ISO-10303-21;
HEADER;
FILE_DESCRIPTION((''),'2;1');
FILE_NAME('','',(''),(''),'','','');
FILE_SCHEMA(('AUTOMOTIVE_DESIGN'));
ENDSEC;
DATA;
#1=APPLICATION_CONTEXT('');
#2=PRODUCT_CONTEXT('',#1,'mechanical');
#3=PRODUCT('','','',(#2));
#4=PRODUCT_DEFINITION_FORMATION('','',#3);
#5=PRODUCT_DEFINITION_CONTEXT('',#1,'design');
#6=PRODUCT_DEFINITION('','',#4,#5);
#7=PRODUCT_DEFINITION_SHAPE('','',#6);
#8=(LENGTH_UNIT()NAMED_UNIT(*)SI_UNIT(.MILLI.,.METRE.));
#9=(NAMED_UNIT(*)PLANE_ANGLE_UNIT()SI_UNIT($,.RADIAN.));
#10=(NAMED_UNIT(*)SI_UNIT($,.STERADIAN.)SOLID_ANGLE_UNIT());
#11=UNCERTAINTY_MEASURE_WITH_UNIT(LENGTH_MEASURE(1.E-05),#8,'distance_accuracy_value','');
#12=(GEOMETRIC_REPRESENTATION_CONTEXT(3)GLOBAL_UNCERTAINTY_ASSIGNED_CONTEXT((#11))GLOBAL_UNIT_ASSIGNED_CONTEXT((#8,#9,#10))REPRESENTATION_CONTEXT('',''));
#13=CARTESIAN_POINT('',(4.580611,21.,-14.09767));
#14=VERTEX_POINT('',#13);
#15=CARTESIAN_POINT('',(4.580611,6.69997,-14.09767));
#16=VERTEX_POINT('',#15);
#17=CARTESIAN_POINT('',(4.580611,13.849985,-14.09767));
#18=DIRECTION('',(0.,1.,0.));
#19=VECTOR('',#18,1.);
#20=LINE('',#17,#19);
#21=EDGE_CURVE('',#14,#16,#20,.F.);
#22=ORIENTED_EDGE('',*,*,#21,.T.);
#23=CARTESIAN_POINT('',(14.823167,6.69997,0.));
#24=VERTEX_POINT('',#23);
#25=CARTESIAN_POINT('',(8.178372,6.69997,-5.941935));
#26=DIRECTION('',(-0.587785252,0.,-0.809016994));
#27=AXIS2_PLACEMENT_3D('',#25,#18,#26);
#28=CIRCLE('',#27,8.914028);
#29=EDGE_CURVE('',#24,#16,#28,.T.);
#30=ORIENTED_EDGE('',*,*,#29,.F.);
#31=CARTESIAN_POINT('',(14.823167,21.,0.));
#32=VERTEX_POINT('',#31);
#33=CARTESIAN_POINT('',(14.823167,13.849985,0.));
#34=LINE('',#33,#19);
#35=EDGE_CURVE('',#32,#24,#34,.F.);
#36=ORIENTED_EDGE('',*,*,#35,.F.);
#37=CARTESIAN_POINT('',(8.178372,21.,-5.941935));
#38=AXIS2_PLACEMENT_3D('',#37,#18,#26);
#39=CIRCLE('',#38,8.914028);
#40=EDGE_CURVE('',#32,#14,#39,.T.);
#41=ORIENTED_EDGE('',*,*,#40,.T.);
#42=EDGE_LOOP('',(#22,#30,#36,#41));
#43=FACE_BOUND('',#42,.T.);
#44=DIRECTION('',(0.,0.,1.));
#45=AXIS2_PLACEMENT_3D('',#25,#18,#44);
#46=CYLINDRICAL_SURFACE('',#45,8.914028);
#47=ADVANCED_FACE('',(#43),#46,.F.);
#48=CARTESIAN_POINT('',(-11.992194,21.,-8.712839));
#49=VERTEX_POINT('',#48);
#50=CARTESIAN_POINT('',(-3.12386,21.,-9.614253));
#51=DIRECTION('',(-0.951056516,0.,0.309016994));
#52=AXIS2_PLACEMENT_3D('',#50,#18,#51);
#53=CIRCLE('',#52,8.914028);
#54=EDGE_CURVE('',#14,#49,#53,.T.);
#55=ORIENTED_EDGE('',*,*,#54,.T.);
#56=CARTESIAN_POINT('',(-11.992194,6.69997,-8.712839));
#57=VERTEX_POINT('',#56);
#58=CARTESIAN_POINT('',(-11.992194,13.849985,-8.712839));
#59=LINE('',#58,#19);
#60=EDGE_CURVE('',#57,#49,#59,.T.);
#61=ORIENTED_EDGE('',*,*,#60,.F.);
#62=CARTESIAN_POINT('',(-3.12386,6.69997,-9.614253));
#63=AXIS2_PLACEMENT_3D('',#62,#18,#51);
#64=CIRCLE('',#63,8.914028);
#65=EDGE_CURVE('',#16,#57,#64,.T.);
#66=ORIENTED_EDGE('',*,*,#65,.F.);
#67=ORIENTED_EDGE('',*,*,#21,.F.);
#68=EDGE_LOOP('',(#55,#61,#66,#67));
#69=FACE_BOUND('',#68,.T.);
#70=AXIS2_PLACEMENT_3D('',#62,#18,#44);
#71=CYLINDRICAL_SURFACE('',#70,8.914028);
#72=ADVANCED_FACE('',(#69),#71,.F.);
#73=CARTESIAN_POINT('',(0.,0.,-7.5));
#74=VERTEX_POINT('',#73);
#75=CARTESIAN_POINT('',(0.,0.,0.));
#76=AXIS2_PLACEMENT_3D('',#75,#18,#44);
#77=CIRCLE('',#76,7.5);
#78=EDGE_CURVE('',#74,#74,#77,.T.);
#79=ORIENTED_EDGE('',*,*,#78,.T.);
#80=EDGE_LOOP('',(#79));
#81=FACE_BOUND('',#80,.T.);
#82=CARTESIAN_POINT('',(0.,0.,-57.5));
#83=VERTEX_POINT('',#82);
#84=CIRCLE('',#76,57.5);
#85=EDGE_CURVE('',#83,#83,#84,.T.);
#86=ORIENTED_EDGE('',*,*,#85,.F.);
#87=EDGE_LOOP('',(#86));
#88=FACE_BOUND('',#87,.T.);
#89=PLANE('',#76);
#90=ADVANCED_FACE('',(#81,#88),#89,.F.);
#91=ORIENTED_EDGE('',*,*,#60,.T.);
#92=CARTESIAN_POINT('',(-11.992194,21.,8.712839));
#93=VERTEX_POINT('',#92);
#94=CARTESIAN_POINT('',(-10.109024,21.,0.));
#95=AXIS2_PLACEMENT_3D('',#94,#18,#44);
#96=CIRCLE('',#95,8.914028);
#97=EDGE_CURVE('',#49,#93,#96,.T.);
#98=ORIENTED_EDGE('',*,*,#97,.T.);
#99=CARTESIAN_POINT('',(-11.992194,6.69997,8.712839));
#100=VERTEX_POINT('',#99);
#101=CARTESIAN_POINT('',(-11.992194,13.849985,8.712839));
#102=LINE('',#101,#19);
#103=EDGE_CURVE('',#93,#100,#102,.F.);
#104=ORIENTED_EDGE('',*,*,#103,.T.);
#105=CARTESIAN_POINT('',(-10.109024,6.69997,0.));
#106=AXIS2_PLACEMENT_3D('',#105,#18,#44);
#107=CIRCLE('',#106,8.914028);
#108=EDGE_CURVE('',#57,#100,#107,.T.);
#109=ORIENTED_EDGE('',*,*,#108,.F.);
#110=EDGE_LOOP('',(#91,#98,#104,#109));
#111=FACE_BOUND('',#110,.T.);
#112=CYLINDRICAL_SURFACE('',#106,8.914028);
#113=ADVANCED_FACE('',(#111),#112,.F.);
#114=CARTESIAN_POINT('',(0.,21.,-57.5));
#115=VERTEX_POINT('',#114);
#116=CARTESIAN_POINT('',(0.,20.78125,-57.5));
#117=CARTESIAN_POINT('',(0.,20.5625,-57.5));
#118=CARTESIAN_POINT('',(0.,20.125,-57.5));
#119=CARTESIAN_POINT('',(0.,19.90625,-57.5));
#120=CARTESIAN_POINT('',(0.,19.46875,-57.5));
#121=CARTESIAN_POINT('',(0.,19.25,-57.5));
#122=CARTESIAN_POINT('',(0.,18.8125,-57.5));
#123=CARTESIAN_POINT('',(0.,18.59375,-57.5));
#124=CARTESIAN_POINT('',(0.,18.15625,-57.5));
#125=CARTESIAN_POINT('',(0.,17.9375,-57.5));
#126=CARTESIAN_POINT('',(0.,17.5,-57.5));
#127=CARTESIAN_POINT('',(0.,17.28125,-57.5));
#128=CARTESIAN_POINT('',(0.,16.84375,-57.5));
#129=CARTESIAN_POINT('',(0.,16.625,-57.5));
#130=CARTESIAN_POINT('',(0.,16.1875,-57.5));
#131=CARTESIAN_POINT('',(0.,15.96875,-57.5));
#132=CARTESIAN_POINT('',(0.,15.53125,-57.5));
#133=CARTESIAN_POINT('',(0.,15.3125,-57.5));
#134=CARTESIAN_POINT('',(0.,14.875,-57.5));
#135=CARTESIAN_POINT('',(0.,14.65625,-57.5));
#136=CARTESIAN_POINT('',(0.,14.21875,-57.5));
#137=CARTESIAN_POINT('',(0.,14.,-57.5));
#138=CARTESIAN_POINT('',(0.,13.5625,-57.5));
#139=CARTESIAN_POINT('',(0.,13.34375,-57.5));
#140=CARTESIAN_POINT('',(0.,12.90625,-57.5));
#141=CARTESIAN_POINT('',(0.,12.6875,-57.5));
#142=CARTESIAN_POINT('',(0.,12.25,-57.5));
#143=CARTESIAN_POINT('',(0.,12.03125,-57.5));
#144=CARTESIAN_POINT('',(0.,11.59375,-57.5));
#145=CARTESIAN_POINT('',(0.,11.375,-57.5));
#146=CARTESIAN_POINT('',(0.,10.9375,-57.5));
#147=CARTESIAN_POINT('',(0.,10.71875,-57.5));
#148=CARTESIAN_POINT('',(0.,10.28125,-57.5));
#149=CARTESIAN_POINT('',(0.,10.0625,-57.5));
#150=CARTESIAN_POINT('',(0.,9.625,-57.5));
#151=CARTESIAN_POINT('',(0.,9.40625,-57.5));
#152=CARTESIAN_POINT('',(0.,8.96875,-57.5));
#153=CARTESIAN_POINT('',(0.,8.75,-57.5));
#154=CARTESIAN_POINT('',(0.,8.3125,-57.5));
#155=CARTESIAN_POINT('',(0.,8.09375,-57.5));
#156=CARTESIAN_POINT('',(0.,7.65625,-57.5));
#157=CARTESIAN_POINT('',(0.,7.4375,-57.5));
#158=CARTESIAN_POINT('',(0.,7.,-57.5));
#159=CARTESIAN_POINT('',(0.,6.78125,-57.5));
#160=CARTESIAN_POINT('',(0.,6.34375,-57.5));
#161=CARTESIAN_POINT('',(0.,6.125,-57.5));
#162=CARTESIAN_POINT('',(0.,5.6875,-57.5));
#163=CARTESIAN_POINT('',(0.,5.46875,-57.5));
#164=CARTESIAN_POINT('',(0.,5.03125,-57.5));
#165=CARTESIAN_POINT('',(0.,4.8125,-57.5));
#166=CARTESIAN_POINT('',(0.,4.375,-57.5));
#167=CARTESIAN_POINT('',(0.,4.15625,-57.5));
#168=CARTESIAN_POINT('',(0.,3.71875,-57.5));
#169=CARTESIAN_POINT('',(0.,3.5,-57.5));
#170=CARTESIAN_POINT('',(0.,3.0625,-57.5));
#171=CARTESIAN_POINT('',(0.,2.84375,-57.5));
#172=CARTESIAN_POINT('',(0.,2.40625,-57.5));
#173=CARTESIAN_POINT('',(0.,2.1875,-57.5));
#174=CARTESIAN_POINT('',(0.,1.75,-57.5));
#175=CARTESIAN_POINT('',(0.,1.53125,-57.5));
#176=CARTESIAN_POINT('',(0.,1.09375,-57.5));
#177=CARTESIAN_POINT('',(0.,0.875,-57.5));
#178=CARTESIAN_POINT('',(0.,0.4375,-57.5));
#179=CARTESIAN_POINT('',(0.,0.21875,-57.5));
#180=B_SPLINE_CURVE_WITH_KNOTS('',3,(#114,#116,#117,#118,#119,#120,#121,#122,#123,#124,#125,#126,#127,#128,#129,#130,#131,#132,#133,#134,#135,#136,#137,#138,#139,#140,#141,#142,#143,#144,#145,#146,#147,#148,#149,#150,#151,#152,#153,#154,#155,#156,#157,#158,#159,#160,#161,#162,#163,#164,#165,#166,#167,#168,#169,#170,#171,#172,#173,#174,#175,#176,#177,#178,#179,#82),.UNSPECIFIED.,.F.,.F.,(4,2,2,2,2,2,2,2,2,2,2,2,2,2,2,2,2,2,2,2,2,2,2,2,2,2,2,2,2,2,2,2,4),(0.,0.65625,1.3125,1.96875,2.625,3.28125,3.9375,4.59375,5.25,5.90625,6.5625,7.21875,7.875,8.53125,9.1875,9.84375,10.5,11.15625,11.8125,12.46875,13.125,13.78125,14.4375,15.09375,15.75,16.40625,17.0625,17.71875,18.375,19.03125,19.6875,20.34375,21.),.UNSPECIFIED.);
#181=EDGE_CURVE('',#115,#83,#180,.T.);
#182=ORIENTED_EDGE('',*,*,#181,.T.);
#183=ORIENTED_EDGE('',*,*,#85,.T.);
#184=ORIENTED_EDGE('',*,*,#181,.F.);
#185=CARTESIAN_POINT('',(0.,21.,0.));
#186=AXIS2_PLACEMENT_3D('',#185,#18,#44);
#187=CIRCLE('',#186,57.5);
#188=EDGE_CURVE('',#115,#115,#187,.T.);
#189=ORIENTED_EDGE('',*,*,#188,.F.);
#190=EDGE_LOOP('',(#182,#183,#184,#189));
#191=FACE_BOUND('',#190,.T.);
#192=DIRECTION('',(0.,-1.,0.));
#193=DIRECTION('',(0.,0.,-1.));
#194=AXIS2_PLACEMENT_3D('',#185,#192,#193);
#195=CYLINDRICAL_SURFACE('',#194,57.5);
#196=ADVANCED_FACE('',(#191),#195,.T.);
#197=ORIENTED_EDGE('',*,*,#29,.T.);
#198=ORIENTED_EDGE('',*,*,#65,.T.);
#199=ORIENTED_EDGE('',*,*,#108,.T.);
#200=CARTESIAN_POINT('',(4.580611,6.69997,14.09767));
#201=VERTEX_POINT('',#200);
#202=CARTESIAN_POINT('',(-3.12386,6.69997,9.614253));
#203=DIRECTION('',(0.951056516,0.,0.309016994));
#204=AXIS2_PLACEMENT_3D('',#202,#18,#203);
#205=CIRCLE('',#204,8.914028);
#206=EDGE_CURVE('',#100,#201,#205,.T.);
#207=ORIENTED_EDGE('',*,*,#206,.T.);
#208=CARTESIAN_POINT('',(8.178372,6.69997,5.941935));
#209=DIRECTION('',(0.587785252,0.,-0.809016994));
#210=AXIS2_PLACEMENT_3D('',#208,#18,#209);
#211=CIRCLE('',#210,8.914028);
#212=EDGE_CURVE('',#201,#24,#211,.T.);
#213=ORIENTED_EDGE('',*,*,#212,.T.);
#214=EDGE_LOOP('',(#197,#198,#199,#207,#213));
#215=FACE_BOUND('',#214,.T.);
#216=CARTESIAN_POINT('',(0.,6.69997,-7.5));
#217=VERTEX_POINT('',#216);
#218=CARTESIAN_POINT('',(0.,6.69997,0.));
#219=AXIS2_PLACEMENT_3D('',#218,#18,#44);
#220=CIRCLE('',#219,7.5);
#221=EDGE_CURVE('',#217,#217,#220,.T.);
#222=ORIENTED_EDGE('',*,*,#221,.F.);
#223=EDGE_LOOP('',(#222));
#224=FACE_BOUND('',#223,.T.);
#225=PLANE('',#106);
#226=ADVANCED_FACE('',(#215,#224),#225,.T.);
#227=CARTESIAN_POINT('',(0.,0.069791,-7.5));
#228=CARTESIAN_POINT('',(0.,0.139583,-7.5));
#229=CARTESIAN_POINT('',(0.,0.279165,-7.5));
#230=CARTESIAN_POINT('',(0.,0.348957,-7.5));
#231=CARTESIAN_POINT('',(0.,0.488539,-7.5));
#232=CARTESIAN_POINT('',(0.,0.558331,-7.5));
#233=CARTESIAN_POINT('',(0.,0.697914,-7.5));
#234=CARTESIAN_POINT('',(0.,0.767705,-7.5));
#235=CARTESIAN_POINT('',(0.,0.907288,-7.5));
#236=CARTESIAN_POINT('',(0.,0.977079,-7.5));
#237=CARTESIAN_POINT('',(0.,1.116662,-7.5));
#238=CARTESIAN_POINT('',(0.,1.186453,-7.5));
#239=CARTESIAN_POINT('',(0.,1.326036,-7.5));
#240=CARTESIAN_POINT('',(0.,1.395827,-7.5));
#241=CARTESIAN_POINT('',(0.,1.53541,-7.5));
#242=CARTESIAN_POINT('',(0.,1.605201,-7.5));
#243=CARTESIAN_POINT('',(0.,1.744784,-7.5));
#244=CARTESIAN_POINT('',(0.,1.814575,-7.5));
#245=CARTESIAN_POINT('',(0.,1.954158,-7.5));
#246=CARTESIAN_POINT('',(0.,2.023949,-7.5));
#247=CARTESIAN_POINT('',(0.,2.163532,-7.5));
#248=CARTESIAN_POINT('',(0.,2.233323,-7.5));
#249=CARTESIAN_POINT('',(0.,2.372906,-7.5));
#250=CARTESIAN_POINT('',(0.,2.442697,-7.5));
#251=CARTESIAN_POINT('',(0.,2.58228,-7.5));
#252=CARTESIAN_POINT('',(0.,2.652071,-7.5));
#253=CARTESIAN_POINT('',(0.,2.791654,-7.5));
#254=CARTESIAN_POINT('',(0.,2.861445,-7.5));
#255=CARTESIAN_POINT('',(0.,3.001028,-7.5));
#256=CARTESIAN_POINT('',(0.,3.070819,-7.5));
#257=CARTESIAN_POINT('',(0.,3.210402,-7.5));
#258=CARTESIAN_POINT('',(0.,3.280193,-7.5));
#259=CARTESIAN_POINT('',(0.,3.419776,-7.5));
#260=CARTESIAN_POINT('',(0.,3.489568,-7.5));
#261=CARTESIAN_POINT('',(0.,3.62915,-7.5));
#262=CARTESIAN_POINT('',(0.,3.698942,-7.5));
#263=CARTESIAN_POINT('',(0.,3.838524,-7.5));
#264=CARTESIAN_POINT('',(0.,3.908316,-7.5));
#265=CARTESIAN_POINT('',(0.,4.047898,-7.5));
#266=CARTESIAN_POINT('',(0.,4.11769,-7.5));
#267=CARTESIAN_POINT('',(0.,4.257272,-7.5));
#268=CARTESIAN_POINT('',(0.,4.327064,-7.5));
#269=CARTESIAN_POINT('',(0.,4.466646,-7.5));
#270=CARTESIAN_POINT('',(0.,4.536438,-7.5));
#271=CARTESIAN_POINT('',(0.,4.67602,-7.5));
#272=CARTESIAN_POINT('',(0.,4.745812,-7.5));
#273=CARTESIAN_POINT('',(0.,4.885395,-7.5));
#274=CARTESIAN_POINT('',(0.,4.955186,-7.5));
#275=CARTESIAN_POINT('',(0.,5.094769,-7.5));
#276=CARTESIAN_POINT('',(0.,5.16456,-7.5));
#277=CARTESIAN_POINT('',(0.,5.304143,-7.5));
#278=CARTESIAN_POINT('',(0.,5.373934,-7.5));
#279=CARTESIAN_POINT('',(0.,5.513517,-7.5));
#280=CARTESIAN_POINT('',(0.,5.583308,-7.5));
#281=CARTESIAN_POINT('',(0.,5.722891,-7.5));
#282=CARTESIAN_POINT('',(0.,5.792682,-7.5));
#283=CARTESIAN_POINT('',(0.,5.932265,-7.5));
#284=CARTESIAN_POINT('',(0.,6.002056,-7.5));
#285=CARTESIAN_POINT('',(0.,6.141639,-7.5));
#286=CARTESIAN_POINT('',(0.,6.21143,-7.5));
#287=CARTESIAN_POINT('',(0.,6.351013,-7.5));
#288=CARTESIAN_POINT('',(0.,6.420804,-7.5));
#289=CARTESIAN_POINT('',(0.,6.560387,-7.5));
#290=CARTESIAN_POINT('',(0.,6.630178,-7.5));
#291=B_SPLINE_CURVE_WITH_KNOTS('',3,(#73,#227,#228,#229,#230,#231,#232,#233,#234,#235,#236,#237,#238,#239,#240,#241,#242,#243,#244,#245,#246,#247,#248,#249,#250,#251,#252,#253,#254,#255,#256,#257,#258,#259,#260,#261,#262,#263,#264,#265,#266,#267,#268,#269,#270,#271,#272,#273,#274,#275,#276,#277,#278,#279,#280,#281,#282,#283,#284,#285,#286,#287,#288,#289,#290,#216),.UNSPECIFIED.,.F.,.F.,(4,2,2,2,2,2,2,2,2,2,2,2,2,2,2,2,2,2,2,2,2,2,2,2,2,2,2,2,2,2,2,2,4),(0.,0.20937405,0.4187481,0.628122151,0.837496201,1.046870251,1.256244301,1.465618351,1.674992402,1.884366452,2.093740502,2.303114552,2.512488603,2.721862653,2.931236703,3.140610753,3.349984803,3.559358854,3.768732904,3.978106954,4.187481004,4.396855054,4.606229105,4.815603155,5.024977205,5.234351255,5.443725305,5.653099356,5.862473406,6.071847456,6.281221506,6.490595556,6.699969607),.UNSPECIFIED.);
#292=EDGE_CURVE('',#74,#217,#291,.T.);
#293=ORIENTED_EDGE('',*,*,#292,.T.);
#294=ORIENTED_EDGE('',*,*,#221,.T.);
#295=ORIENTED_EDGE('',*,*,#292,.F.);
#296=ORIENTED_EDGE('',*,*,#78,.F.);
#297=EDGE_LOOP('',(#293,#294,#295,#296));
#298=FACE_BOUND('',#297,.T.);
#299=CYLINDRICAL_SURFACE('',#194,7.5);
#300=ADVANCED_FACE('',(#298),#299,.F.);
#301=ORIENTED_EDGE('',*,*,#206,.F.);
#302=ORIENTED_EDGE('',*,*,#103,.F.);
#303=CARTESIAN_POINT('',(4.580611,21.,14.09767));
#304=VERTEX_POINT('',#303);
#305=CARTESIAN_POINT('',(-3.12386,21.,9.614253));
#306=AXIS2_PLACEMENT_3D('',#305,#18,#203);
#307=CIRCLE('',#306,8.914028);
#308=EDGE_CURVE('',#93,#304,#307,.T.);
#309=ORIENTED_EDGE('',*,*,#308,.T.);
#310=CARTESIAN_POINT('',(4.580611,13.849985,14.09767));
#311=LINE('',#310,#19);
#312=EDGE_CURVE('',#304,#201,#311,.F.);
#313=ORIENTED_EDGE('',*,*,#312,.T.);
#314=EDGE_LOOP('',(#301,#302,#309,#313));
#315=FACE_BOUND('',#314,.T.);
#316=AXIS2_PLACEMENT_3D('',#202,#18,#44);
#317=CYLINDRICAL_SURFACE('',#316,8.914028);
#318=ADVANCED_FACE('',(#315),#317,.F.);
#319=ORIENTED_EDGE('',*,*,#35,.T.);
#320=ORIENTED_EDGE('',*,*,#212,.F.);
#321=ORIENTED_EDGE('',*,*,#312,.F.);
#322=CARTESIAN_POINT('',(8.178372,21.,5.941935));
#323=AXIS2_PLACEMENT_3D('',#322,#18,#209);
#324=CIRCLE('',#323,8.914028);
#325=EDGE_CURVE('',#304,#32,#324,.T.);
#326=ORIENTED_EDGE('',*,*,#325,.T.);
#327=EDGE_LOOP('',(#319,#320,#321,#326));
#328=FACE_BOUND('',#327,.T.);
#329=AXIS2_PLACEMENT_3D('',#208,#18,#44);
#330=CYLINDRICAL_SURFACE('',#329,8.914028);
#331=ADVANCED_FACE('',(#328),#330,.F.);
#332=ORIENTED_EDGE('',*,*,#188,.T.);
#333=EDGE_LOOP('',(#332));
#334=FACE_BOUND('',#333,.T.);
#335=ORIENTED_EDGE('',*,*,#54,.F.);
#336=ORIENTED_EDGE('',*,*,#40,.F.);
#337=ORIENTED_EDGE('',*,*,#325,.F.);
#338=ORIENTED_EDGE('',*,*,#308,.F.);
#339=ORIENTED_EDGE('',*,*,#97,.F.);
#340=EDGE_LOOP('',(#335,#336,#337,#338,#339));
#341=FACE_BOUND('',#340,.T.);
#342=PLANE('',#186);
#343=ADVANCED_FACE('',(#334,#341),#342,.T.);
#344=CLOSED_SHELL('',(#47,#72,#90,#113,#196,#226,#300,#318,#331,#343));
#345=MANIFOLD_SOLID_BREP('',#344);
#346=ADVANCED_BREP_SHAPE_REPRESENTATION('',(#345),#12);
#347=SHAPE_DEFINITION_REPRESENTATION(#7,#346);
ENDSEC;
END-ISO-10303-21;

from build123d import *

# Parameters (mm, degrees)
SKETCH1_R           = 57.5
BOSS_EXTRUDE1_DEPTH = 21
SKETCH2_R           = 7.5
CUT_EXTRUDE1_DEPTH  = 84.985117729
SKETCH3_R           = 8.914028006
CUT_EXTRUDE2_DEPTH  = 14.300030393
CIRPATTERN1_COUNT   = 5


with BuildPart() as part:
    # Sketch1 → Boss-Extrude1 (new body)
    with BuildSketch(Plane(origin=(0, 0, 0), x_dir=(1, 0, 0), z_dir=(0, 1, 0))):
        Circle(SKETCH1_R)
    extrude(amount=BOSS_EXTRUDE1_DEPTH)

    # Sketch2 → Cut-Extrude1 (cut, through all)
    with BuildSketch(Plane(origin=(0, 0, 0), x_dir=(1, 0, 0), z_dir=(0, 1, 0))):
        Circle(SKETCH2_R)
    extrude(amount=CUT_EXTRUDE1_DEPTH, mode=Mode.SUBTRACT)

    # Sketch3 → Cut-Extrude2 (cut)
    with BuildSketch(Plane(origin=(0, 21, 0), x_dir=(1, 0, 0), z_dir=(0, 1, 0))):
        with Locations((-10.109024176, 0)):
            Circle(SKETCH3_R)
    cut_extrude2 = extrude(amount=-CUT_EXTRUDE2_DEPTH, mode=Mode.SUBTRACT)

    # CirPattern1: Cut-Extrude2 ×5 about axis
    cirpattern1_axis = Axis((0, 0, 0), (0, 1, 0))
    for i in range(1, CIRPATTERN1_COUNT):
        add(cut_extrude2.rotate(cirpattern1_axis, i * 360 / CIRPATTERN1_COUNT), mode=Mode.SUBTRACT)


solid = part.part
